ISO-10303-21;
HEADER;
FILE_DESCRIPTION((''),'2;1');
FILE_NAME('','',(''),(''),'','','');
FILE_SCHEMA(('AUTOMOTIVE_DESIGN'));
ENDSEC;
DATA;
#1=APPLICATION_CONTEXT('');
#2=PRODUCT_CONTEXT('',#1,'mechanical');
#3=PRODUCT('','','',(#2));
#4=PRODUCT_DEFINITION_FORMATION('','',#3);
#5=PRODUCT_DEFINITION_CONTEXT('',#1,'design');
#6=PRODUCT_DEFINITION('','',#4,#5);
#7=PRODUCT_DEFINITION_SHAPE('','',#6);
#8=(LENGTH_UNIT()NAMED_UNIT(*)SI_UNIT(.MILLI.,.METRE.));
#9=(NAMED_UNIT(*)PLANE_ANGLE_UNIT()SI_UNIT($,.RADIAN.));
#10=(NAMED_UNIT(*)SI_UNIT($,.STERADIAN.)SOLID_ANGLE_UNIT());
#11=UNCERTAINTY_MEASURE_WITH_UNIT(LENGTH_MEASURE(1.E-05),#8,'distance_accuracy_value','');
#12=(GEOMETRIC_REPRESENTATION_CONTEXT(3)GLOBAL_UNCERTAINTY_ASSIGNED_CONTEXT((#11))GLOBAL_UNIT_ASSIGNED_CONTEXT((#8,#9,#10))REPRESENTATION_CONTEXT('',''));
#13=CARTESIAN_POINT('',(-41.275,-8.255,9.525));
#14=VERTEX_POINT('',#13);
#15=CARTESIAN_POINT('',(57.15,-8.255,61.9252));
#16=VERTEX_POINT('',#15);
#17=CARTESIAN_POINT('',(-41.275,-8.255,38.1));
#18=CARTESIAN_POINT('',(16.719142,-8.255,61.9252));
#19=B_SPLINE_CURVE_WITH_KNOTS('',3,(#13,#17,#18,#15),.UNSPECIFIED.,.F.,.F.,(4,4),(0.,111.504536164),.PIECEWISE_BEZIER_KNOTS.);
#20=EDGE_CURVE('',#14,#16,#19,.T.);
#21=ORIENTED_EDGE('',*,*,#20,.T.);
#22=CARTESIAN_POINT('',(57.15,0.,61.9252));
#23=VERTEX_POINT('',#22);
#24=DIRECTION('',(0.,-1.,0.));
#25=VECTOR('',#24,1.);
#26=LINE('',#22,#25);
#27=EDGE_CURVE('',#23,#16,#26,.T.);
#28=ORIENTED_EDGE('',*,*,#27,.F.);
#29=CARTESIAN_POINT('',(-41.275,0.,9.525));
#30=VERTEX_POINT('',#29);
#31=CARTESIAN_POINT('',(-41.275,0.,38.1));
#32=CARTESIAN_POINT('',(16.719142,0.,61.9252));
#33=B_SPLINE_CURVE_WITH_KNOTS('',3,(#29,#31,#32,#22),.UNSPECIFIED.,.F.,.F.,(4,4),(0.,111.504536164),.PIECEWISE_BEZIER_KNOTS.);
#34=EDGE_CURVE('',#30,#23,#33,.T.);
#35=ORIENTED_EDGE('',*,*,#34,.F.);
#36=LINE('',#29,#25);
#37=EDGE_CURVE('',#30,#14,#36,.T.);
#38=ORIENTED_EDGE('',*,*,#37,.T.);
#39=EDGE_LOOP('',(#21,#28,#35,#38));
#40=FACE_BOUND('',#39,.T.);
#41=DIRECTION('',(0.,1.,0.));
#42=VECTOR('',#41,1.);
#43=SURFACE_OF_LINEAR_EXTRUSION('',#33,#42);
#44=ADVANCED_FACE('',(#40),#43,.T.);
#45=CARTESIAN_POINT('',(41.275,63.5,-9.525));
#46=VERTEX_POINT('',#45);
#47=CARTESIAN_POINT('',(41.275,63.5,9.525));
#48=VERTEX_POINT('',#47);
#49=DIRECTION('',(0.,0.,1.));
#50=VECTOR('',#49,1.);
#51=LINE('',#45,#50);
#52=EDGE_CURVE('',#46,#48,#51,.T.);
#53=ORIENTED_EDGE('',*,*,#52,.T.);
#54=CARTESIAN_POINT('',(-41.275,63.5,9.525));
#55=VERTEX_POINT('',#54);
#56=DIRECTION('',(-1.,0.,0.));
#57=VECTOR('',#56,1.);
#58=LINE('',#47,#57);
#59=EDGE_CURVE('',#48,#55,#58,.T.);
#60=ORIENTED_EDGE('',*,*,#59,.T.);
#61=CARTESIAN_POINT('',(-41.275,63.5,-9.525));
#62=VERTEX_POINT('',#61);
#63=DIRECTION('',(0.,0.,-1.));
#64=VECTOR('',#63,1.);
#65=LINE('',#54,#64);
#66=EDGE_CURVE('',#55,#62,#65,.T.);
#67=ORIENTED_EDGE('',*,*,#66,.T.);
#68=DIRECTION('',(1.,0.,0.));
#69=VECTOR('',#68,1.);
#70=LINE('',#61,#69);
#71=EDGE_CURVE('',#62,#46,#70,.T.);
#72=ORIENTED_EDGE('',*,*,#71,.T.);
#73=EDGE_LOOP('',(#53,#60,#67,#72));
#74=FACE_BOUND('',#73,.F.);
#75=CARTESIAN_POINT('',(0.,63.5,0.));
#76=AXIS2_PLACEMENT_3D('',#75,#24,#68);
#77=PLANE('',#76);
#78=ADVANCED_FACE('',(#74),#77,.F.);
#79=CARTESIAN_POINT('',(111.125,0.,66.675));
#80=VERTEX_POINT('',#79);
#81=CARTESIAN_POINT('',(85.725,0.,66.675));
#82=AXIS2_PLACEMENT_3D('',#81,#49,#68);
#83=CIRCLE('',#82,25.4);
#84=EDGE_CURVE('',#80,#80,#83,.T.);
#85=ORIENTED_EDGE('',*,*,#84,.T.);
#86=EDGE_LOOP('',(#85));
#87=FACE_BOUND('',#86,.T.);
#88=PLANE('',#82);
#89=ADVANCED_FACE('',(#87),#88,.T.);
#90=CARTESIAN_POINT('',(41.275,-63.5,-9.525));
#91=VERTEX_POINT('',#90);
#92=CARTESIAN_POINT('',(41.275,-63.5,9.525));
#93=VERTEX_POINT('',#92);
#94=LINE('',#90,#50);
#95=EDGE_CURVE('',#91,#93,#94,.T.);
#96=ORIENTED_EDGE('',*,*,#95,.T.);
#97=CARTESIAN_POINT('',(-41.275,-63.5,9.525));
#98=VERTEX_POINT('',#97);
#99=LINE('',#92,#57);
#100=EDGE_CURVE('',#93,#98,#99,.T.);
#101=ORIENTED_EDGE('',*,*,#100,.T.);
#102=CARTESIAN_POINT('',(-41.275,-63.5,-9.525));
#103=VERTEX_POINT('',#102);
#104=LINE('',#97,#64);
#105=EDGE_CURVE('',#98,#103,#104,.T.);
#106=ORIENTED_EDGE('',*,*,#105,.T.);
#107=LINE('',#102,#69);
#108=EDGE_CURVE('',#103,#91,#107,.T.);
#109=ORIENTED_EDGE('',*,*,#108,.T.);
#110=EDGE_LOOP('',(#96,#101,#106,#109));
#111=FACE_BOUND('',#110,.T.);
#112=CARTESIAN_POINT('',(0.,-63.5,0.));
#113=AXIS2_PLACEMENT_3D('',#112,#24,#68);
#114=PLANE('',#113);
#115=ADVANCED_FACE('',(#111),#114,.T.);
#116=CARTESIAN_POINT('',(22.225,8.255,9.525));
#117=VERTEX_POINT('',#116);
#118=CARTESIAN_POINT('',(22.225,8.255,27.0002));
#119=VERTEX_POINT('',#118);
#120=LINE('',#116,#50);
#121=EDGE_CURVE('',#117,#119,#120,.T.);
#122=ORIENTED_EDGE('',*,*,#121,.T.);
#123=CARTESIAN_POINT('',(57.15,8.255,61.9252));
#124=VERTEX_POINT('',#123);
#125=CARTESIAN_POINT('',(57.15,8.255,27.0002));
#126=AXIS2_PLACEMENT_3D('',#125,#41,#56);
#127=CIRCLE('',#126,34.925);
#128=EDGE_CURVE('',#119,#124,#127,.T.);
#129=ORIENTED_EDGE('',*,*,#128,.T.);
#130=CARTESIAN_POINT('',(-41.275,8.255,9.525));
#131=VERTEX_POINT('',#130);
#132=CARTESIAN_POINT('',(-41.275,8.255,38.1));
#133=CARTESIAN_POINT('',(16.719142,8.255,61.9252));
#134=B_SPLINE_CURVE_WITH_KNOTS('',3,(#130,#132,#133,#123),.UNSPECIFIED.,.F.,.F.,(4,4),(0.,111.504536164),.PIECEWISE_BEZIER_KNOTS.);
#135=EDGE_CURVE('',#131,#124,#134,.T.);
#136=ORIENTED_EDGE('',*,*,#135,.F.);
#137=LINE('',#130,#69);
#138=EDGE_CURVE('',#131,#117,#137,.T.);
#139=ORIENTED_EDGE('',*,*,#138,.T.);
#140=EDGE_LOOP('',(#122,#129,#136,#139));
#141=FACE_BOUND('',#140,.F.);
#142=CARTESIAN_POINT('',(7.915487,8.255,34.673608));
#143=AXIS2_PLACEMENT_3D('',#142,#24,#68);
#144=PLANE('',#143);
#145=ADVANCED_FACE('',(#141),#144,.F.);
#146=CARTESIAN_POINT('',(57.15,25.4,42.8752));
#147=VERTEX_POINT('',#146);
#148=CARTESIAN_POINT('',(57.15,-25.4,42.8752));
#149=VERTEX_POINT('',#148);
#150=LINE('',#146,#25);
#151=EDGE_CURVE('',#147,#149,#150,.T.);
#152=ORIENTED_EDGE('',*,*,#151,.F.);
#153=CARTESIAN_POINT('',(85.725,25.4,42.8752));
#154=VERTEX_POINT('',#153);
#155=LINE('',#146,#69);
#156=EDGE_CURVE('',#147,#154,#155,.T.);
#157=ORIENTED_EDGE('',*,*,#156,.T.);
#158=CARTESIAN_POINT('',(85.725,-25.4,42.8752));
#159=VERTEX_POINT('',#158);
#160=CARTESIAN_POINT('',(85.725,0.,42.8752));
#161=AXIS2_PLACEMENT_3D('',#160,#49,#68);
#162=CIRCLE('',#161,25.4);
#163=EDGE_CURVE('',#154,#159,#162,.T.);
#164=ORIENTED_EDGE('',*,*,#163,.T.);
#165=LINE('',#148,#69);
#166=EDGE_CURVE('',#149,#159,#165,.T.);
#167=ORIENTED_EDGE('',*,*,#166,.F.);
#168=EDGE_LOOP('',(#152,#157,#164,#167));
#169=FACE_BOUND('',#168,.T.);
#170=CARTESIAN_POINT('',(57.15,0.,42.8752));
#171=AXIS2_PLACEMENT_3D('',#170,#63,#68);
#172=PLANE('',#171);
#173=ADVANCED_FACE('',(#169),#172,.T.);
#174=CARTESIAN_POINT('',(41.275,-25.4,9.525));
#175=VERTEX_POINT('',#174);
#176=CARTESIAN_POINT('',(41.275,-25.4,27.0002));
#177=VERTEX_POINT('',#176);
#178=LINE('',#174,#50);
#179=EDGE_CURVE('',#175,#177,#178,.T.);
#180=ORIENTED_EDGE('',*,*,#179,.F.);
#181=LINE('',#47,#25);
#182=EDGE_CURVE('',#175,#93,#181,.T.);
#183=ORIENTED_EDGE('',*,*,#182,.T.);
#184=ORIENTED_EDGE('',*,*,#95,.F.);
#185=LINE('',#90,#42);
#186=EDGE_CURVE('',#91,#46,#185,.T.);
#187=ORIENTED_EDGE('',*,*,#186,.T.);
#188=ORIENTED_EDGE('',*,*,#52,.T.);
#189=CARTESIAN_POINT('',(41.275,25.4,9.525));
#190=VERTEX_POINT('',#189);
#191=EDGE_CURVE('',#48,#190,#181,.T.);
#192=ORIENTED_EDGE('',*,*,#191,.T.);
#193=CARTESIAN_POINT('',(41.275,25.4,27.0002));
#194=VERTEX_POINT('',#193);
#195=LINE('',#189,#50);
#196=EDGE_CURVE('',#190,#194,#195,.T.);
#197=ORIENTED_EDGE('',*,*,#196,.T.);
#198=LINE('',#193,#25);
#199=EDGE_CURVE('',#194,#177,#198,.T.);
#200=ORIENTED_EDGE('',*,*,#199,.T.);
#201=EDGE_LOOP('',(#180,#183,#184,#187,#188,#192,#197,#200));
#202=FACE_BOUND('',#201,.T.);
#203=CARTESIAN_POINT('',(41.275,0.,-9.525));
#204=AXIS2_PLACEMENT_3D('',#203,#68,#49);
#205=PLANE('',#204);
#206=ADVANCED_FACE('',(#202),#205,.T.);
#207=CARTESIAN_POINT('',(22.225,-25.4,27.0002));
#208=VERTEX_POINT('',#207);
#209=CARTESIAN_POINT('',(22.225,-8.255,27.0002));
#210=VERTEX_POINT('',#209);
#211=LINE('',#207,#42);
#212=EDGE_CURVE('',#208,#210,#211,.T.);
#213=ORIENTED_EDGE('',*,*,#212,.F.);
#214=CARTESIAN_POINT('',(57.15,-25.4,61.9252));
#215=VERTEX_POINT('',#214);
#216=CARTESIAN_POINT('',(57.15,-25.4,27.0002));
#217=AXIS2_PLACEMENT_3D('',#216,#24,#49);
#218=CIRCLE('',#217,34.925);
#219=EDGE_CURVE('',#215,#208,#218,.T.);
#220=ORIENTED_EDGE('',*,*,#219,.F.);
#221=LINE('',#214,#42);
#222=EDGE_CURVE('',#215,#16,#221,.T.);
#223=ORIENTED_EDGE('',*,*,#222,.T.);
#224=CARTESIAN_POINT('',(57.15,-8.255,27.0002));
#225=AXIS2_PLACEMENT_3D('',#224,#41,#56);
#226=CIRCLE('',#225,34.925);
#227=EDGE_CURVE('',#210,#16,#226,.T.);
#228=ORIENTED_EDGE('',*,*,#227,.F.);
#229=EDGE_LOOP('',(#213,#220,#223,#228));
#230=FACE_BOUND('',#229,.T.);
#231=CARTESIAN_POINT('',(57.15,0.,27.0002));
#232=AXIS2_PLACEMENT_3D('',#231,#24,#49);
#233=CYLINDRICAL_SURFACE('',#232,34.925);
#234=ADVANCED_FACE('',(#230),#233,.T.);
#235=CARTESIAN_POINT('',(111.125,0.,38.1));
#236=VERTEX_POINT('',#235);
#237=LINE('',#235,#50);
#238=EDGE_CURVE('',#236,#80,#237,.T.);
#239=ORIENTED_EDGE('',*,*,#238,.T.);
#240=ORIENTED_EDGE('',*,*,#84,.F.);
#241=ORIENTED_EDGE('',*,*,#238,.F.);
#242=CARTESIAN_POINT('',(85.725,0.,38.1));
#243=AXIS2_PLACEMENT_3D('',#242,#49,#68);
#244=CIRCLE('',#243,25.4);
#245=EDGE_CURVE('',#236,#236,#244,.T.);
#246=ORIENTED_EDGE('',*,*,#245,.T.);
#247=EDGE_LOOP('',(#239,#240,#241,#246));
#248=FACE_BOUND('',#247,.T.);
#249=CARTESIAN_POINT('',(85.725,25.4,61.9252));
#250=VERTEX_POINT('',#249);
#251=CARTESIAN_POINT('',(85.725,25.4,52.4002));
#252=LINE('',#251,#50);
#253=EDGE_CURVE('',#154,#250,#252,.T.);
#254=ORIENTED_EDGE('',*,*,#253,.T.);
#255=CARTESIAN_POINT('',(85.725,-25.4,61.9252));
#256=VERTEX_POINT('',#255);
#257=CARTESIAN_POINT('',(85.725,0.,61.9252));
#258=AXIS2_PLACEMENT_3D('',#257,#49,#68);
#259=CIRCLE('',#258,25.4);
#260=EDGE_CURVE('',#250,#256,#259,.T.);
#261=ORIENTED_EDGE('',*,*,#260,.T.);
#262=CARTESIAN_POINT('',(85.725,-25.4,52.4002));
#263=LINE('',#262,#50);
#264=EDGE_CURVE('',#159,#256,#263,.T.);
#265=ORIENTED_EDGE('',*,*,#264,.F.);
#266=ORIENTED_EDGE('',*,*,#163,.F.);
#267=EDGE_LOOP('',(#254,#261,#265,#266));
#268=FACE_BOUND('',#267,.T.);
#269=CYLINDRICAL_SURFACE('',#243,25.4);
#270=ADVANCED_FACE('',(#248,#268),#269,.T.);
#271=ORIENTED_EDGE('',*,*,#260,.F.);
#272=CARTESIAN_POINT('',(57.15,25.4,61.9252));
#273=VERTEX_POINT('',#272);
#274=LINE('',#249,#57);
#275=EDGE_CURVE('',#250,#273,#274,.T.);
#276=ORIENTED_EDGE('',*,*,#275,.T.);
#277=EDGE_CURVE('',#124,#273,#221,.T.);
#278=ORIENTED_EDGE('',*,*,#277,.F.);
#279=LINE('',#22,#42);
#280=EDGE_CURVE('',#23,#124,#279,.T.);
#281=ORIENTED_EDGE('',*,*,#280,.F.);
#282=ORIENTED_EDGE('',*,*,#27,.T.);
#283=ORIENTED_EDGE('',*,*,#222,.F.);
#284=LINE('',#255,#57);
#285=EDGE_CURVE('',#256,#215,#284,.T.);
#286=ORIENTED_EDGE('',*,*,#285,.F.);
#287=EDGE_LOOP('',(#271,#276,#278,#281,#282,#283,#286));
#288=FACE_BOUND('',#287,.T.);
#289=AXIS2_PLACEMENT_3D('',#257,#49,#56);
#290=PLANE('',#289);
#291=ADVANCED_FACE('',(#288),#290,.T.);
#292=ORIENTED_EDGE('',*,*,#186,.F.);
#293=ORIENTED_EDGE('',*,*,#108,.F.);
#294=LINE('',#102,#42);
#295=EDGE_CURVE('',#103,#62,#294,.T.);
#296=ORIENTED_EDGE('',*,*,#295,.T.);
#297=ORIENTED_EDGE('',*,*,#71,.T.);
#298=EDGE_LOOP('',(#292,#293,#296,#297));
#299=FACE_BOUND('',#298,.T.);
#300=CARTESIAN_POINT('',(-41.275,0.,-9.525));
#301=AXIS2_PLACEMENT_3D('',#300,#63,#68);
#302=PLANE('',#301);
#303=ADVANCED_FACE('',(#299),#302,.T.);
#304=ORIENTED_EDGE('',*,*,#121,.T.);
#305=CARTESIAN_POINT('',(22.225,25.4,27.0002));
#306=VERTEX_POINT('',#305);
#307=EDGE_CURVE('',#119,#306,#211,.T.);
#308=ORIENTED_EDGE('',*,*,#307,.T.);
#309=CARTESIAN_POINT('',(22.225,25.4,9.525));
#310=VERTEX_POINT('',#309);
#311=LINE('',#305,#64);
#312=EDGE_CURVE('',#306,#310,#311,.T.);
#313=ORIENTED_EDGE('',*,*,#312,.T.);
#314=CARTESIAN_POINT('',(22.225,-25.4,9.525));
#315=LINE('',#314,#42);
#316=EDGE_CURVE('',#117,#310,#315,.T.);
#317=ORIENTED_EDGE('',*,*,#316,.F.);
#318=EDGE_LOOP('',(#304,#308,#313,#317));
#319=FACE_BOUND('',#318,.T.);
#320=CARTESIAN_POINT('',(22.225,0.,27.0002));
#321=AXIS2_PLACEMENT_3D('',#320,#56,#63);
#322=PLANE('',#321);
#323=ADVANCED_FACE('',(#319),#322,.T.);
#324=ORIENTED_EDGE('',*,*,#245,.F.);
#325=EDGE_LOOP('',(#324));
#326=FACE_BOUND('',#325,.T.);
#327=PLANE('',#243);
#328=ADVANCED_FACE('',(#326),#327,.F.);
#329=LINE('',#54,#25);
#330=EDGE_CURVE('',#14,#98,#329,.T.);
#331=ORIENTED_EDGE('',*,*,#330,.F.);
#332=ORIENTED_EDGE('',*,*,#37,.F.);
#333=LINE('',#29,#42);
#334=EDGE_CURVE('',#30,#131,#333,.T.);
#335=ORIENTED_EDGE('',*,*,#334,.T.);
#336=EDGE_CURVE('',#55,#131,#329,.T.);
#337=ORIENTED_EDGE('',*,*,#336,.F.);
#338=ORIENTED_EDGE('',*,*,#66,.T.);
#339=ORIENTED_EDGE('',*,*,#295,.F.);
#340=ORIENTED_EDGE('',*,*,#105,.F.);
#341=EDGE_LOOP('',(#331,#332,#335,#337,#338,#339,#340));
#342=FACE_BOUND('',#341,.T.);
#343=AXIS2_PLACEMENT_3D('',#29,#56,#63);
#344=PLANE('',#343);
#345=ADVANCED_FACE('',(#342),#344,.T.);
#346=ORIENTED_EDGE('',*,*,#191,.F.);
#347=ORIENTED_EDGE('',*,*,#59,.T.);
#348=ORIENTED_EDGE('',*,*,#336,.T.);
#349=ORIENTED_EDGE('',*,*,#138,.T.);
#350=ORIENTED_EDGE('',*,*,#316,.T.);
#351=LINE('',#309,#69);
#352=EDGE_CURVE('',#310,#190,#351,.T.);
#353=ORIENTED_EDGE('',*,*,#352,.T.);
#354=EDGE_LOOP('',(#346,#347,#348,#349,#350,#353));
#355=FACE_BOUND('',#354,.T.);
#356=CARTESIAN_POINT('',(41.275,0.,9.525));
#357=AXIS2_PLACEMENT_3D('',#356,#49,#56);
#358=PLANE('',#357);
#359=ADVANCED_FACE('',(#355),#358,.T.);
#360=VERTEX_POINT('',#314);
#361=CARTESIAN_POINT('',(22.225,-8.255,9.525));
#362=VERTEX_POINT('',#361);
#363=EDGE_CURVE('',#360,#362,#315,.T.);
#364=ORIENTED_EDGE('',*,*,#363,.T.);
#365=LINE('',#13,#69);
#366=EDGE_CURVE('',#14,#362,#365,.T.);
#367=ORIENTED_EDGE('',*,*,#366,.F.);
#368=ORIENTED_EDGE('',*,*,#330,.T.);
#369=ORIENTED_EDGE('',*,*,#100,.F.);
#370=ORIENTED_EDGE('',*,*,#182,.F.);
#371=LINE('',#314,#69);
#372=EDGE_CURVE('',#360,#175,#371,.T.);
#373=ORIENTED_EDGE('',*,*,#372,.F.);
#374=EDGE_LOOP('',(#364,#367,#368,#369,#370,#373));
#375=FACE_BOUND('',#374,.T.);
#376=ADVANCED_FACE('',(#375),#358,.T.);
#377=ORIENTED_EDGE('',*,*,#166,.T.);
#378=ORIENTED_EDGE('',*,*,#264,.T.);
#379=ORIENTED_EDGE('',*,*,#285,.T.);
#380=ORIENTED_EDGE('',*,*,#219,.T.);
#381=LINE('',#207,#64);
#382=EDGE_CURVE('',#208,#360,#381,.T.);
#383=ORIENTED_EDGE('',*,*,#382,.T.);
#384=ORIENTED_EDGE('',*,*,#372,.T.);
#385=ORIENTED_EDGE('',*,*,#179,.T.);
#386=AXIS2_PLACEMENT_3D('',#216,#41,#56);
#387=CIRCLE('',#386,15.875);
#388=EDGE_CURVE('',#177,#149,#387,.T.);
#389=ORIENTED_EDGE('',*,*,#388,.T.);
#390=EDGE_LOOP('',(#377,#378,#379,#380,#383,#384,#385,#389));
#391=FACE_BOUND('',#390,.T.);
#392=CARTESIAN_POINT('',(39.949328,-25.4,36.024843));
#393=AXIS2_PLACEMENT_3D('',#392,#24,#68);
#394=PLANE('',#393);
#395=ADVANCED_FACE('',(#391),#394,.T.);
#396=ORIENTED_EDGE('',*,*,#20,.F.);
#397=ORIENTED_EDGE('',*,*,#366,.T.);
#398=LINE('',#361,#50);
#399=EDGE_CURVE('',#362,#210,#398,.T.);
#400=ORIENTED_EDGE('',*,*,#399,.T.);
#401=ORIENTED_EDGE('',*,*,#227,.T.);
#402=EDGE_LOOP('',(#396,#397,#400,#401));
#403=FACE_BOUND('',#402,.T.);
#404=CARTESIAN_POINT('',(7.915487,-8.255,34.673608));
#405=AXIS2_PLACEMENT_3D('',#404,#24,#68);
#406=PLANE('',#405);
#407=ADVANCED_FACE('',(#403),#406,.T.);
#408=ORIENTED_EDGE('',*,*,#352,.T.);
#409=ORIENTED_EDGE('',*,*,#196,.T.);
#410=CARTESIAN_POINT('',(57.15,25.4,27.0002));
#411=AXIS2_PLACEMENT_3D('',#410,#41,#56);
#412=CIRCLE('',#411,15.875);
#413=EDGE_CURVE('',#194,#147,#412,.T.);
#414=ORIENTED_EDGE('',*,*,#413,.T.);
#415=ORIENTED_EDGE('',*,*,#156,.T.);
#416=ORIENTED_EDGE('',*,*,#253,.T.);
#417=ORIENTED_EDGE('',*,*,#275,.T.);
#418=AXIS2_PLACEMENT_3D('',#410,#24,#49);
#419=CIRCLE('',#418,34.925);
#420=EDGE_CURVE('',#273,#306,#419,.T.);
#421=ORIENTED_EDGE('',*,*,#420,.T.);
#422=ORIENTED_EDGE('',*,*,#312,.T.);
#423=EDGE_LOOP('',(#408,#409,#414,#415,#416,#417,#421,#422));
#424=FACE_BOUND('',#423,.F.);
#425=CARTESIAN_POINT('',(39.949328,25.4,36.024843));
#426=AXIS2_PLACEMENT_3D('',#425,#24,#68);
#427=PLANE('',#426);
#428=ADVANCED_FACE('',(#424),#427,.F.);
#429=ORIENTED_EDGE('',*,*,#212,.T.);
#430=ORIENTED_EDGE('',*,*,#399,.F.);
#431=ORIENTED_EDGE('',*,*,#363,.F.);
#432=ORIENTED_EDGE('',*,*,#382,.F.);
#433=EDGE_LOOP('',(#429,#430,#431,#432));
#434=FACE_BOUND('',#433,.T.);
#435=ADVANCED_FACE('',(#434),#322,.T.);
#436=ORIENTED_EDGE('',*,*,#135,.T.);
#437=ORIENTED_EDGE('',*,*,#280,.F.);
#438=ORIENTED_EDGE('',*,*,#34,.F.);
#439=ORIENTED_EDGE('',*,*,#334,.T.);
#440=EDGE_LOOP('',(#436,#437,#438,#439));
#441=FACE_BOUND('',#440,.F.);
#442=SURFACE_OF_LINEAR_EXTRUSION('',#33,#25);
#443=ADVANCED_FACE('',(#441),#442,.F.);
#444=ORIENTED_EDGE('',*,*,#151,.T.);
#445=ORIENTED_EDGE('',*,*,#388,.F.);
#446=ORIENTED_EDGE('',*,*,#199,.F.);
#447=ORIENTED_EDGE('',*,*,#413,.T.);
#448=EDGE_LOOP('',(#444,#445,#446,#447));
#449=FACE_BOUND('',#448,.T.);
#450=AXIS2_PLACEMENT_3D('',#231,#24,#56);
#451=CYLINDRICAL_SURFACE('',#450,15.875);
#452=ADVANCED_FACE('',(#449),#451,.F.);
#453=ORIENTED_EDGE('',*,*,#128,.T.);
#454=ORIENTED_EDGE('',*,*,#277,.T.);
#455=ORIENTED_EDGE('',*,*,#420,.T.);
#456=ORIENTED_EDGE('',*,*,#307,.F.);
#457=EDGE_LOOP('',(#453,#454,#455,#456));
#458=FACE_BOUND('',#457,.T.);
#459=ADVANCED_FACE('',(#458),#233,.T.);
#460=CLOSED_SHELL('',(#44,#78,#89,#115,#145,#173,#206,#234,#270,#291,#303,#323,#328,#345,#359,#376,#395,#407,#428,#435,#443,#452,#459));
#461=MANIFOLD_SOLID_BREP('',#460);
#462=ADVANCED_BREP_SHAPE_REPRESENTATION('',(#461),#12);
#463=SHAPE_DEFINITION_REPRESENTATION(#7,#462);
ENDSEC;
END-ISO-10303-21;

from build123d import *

# Parameters (mm, degrees)
F1_DEPTH = 63.5
F0_W     = 25.4
F0_H     = 19.05
F2_DEPTH = 25.4
F3_DEPTH = 8.255


with BuildPart() as f1:
    # F0 (on Front) → F1 (new body, symmetric)
    with BuildSketch(Plane.XZ):
        Polygon((41.275, -9.525), (41.275, 9.525), (22.225, 9.525), (-41.275, 9.525), (-41.275, -9.525), align=None)
    extrude(amount=F1_DEPTH, both=True)

    # F0 (on Front) → F2 (join, symmetric)
    with BuildSketch(Plane.XZ):
        with BuildLine():
            Line((22.225, 9.525), (41.275, 9.525))
            Line((41.275, 9.525), (41.275, 27.0002))
            ThreePointArc((41.275, 27.0002), (45.9246798487, 38.2255201513), (57.15, 42.8752))
            Line((57.15, 42.8752), (60.325, 42.8752))
            Line((60.325, 42.8752), (60.325, 61.9252))
            Line((60.325, 61.9252), (57.15, 61.9252))
            ThreePointArc((57.15, 61.9252), (32.4542956671, 51.6959043329), (22.225, 27.0002))
            Line((22.225, 27.0002), (22.225, 9.525))
        make_face()
        with Locations((73.025, 52.4002)):
            Rectangle(F0_W, F0_H)
    extrude(amount=F2_DEPTH, both=True)

    # F0 (on Front) → F3 (join, symmetric)
    with BuildSketch(Plane.XZ):
        with BuildLine():
            Line((-41.275, 9.525), (22.225, 9.525))
            Line((22.225, 9.525), (22.225, 27.0002))
            ThreePointArc((22.225, 27.0002), (32.4542956671, 51.6959043329), (57.15, 61.9252))
            add(Edge.make_bspline(
                [(-41.275, 9.525), (-41.275, 38.1), (16.719141975, 61.9252), (57.15, 61.9252)],
                knots=[0, 0, 0, 0, 111.5045361635, 111.5045361635, 111.5045361635, 111.5045361635], degree=3))
        make_face()
    extrude(amount=F3_DEPTH, both=True)

    # F0 (on Front) → F4 (revolve)
    with BuildSketch(Plane.XZ):
        Polygon((85.725, 61.9252), (85.725, 42.8752), (85.725, 38.1), (111.125, 38.1), (111.125, 66.675), (85.725, 66.675), align=None)
    revolve(axis=Axis((85.725, 0, 52.3875), (0, 0, 1)))


solid = f1.part
